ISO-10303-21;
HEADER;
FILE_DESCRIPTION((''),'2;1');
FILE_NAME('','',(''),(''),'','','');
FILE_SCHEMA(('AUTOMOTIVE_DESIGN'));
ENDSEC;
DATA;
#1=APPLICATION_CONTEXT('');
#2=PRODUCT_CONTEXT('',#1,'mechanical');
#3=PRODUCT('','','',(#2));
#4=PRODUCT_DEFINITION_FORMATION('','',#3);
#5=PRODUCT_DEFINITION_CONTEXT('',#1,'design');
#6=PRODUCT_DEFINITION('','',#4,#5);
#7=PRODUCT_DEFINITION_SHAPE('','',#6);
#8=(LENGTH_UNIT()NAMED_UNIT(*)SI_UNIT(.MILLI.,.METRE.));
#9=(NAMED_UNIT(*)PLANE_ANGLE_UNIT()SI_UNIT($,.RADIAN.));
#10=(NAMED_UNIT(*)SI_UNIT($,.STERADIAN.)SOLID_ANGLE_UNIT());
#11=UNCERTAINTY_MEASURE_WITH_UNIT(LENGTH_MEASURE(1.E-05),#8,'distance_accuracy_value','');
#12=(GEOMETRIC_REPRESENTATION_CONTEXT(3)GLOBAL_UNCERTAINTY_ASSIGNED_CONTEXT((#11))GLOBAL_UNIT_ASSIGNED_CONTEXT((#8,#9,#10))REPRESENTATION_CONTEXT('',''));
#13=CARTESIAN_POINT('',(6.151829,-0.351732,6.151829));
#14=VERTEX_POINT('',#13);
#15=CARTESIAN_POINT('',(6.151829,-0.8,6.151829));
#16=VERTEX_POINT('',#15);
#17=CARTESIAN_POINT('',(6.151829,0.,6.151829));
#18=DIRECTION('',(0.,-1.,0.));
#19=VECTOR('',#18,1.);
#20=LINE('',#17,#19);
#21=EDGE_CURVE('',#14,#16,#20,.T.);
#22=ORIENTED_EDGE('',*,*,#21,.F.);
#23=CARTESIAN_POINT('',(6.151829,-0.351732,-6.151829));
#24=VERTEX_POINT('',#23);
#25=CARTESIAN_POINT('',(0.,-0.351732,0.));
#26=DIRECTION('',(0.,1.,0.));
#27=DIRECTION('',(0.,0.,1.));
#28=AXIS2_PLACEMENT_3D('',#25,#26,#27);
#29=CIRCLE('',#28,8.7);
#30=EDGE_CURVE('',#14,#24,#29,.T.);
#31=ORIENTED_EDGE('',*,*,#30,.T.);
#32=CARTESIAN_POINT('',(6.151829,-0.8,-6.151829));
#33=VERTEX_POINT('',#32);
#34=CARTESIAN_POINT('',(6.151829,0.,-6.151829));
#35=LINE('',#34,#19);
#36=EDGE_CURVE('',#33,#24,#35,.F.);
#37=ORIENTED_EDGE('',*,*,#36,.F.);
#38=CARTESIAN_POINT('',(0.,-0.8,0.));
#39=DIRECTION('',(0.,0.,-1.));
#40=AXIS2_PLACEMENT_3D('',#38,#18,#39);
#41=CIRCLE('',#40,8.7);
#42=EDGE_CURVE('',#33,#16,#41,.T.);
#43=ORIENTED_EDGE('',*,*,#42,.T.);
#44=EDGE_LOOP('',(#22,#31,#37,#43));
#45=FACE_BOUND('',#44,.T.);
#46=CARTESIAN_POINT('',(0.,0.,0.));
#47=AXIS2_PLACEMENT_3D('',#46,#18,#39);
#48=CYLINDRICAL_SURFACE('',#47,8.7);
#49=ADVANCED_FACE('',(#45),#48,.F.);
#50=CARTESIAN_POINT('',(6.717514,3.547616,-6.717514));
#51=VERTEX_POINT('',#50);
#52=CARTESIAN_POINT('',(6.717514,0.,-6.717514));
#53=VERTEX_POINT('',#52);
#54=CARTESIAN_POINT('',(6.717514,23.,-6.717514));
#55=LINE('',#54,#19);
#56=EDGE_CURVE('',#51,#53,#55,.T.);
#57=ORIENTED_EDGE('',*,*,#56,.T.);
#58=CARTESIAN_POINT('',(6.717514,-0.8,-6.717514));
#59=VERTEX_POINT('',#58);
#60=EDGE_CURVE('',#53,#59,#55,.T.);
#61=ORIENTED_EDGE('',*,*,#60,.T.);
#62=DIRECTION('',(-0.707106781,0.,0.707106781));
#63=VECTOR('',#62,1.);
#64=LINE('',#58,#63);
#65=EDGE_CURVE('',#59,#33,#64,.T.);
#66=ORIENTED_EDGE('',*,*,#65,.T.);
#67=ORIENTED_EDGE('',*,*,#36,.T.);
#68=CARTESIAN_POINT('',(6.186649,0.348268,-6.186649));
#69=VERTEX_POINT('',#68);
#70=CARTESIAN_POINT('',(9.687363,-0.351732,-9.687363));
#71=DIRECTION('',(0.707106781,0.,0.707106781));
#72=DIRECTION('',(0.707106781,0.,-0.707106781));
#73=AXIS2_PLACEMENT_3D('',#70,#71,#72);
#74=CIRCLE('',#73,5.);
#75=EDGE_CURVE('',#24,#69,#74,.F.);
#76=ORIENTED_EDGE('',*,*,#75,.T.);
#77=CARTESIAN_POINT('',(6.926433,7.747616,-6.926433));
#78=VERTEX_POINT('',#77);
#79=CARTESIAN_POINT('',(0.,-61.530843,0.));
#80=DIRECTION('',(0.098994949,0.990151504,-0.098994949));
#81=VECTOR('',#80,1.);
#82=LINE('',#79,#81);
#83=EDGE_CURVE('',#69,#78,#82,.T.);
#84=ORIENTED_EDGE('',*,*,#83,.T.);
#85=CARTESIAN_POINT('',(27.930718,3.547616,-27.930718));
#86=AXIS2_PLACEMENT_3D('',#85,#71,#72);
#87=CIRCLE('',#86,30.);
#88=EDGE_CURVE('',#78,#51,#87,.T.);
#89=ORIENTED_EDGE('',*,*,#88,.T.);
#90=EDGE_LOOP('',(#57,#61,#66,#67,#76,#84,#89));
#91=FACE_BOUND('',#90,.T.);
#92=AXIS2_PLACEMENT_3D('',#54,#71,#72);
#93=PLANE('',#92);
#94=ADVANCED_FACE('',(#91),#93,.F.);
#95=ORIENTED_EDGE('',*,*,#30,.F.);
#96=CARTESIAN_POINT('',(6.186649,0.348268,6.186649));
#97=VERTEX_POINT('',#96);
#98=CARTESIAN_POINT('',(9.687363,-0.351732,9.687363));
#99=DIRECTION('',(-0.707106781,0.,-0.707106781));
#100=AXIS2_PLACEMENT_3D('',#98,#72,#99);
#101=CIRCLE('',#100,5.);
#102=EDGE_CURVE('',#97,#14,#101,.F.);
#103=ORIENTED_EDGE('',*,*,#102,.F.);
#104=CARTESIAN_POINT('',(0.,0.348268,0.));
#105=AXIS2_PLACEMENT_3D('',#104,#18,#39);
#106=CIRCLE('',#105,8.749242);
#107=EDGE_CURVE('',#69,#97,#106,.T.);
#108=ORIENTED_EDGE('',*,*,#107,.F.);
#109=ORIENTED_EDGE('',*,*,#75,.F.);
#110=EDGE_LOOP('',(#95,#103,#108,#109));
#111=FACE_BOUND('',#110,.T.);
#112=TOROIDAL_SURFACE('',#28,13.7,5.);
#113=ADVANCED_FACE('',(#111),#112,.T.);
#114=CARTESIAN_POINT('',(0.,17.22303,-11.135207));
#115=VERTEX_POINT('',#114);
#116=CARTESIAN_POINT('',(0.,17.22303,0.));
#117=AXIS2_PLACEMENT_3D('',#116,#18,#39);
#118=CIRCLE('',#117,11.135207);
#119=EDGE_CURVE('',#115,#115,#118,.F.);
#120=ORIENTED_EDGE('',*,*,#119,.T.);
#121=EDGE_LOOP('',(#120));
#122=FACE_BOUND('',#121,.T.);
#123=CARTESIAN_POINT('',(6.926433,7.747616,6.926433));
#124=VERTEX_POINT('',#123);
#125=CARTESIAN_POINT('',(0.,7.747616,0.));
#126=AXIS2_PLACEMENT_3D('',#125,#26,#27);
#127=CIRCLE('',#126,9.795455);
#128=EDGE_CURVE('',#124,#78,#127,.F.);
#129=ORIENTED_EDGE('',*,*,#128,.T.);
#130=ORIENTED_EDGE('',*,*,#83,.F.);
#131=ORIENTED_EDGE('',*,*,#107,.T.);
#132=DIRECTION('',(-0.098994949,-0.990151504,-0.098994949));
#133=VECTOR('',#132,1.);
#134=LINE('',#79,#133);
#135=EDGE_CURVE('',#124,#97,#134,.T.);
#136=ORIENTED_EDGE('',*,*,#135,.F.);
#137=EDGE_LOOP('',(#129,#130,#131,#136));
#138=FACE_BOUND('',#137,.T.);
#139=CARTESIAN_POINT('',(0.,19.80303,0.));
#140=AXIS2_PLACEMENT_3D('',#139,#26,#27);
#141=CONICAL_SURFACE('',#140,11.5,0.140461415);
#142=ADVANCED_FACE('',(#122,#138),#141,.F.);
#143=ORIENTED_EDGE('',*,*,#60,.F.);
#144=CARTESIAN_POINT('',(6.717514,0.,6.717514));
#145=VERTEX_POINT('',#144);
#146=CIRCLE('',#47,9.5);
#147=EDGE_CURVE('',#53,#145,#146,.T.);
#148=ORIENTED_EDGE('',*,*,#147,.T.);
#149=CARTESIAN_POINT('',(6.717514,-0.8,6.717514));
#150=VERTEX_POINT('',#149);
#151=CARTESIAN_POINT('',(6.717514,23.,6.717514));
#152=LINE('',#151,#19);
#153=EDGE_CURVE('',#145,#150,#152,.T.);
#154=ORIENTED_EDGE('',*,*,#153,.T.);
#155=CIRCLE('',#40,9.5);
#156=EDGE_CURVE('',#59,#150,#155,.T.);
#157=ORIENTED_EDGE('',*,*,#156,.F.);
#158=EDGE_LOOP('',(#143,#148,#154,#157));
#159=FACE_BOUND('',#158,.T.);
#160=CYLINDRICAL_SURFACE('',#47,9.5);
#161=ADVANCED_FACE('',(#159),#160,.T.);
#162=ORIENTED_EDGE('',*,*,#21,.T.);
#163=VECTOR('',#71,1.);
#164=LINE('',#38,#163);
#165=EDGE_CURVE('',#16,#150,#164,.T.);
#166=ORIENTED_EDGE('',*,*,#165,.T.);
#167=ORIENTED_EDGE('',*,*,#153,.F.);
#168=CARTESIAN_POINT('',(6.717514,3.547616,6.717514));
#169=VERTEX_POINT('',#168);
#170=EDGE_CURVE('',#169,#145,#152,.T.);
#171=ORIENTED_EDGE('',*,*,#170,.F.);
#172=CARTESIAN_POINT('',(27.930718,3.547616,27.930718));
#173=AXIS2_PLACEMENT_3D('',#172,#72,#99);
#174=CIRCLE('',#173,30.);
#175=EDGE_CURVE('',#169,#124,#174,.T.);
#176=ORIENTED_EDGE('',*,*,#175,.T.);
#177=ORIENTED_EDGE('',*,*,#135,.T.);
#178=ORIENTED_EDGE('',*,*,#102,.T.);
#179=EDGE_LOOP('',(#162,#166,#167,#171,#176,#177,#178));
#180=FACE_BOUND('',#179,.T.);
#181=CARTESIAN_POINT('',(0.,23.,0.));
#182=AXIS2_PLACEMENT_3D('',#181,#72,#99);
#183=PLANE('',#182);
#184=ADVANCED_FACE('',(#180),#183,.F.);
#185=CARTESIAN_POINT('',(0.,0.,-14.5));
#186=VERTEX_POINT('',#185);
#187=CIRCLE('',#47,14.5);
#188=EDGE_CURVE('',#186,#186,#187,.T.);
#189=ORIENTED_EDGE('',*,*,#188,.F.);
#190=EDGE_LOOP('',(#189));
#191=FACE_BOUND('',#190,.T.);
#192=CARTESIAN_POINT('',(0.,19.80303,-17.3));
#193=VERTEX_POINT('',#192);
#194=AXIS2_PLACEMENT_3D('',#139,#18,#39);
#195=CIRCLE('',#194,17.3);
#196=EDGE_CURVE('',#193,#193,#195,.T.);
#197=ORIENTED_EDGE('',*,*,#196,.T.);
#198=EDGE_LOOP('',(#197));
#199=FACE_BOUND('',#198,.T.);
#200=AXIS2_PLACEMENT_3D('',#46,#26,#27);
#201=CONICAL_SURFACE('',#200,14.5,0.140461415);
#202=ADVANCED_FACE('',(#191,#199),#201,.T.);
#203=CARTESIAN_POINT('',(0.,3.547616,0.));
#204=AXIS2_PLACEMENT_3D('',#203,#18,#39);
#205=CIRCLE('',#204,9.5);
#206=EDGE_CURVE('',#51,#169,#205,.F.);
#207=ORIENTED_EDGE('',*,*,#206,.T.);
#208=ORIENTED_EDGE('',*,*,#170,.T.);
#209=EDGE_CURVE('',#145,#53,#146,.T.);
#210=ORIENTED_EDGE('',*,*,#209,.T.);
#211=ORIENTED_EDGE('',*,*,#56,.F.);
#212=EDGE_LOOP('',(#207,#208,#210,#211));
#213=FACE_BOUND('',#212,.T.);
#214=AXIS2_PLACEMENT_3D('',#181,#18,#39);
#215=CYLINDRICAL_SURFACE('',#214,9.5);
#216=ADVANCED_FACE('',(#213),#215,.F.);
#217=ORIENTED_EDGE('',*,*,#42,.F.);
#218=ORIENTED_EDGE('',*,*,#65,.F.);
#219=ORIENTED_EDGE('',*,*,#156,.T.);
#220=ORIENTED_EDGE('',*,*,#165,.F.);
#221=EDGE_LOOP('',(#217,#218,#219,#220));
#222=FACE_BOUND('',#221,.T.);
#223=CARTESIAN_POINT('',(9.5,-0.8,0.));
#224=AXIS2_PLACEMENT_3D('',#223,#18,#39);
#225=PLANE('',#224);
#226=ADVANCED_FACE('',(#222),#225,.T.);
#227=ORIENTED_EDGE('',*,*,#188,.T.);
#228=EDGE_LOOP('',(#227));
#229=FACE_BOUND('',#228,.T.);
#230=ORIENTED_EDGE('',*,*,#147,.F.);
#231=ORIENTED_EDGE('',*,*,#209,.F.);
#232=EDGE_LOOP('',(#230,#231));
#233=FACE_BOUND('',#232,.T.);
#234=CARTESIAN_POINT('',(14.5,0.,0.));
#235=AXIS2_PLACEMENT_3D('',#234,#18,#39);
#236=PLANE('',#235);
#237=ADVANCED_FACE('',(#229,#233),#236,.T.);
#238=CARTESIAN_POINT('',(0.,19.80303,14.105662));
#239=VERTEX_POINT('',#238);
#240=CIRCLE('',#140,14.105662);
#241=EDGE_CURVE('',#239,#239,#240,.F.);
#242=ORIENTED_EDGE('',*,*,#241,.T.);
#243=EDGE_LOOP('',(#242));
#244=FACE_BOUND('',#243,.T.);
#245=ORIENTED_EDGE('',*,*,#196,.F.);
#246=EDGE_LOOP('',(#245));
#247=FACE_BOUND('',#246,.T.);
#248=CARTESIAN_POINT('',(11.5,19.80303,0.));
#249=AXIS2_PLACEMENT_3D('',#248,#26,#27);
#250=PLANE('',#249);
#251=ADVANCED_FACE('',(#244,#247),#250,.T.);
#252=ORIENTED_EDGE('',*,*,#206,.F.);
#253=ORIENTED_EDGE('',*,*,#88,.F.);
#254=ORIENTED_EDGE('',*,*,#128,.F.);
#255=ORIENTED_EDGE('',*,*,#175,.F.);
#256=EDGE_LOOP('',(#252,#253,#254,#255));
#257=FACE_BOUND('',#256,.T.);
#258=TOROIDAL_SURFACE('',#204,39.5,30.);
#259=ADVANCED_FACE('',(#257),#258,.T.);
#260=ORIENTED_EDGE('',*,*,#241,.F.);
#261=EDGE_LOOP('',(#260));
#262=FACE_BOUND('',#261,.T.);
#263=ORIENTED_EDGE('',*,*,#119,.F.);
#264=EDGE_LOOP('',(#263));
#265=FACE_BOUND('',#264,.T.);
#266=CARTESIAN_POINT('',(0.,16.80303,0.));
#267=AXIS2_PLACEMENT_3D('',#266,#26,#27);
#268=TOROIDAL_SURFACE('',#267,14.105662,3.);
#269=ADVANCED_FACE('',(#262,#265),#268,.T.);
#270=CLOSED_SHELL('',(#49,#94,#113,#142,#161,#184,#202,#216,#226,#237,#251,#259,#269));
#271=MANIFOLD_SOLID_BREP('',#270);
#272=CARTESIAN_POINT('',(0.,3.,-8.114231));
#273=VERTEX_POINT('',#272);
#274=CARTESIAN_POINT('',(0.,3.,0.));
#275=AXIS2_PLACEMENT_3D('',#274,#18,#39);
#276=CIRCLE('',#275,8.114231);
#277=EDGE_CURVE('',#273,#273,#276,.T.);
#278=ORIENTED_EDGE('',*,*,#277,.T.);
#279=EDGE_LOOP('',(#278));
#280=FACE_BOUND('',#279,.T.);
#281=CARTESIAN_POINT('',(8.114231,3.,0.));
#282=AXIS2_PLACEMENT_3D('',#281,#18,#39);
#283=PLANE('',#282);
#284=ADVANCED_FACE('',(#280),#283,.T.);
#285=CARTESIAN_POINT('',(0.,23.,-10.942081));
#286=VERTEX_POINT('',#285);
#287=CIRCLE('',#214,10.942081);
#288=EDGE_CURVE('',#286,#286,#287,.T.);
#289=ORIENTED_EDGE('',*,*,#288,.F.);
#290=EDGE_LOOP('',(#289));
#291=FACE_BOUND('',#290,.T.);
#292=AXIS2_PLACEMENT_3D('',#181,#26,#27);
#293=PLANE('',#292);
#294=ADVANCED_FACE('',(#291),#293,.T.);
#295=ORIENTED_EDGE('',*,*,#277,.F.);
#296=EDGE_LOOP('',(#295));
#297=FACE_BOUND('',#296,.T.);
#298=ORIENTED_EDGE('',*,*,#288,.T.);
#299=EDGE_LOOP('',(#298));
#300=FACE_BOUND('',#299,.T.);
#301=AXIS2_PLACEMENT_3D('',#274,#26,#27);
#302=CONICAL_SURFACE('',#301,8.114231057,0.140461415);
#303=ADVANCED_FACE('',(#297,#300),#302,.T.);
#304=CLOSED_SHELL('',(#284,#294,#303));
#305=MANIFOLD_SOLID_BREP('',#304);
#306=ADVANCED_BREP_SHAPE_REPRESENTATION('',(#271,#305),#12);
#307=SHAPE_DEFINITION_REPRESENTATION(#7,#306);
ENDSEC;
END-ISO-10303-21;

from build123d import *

# Parameters (mm, degrees)
FILLET1_R          = 3
FILLET2_R          = 5
CUT_EXTRUDE1_START = -6.458008592
CUT_EXTRUDE1_DEPTH = 6.458008592
FILLET3_R          = 30


# Read off the part's stored shape, not the designer's step: Cut-Extrude1
with BuildPart() as part:
    # Sketch1 → Revolve1 (revolve)
    with BuildSketch(Plane.XY, mode=Mode.PRIVATE) as revolve1_sk:
        Polygon((8.7, 0), (11.5, 19.803030071), (17.3, 19.803030071), (14.5, 0), (9.5, 0), (9.5, -0.8), (8.7, -0.8), align=None)
        Polygon((0, 23), (10.942081128, 23), (8.114231057, 3), (0, 3), align=None)
    revolve(revolve1_sk.sketch.rotate(Axis((0, 0, 0), (0, 1, 0)), 90), axis=Axis((0, 0, 0), (0, 1, 0)))

    # Fillet1
    fillet1_edges = [part.edges().sort_by_distance(p)[0] for p in [
        (0, 19.803030071, 11.5),
    ]]
    fillet(fillet1_edges, radius=FILLET1_R)

    # Fillet2
    fillet2_edges = [part.edges().sort_by_distance(p)[0] for p in [
        (0, 0, 8.7),
    ]]
    fillet(fillet2_edges, radius=FILLET2_R)

    # Cut-Extrude1 outline → Cut-Extrude1 (cut)
    with BuildSketch(Plane.XZ.offset(0.8).offset(CUT_EXTRUDE1_START)):
        with BuildLine():
            ThreePointArc((6.717514421, 6.717514421), (-9.5, 0), (6.717514421, -6.717514421))
            Line((6.717514421, -6.717514421), (6.151828996, -6.151828996))
            ThreePointArc((6.151828996, -6.151828996), (-8.7, 0), (6.151828996, 6.151828996))
            Line((6.151828996, 6.151828996), (6.717514421, 6.717514421))
        make_face()
    extrude(amount=CUT_EXTRUDE1_DEPTH, mode=Mode.SUBTRACT)

    # Fillet3
    fillet3_edges = [part.edges().sort_by_distance(p)[0] for p in [
        (-8.776855559, 5.658008592, 3.635492607),
    ]]
    fillet(fillet3_edges, radius=FILLET3_R)


solid = part.part
